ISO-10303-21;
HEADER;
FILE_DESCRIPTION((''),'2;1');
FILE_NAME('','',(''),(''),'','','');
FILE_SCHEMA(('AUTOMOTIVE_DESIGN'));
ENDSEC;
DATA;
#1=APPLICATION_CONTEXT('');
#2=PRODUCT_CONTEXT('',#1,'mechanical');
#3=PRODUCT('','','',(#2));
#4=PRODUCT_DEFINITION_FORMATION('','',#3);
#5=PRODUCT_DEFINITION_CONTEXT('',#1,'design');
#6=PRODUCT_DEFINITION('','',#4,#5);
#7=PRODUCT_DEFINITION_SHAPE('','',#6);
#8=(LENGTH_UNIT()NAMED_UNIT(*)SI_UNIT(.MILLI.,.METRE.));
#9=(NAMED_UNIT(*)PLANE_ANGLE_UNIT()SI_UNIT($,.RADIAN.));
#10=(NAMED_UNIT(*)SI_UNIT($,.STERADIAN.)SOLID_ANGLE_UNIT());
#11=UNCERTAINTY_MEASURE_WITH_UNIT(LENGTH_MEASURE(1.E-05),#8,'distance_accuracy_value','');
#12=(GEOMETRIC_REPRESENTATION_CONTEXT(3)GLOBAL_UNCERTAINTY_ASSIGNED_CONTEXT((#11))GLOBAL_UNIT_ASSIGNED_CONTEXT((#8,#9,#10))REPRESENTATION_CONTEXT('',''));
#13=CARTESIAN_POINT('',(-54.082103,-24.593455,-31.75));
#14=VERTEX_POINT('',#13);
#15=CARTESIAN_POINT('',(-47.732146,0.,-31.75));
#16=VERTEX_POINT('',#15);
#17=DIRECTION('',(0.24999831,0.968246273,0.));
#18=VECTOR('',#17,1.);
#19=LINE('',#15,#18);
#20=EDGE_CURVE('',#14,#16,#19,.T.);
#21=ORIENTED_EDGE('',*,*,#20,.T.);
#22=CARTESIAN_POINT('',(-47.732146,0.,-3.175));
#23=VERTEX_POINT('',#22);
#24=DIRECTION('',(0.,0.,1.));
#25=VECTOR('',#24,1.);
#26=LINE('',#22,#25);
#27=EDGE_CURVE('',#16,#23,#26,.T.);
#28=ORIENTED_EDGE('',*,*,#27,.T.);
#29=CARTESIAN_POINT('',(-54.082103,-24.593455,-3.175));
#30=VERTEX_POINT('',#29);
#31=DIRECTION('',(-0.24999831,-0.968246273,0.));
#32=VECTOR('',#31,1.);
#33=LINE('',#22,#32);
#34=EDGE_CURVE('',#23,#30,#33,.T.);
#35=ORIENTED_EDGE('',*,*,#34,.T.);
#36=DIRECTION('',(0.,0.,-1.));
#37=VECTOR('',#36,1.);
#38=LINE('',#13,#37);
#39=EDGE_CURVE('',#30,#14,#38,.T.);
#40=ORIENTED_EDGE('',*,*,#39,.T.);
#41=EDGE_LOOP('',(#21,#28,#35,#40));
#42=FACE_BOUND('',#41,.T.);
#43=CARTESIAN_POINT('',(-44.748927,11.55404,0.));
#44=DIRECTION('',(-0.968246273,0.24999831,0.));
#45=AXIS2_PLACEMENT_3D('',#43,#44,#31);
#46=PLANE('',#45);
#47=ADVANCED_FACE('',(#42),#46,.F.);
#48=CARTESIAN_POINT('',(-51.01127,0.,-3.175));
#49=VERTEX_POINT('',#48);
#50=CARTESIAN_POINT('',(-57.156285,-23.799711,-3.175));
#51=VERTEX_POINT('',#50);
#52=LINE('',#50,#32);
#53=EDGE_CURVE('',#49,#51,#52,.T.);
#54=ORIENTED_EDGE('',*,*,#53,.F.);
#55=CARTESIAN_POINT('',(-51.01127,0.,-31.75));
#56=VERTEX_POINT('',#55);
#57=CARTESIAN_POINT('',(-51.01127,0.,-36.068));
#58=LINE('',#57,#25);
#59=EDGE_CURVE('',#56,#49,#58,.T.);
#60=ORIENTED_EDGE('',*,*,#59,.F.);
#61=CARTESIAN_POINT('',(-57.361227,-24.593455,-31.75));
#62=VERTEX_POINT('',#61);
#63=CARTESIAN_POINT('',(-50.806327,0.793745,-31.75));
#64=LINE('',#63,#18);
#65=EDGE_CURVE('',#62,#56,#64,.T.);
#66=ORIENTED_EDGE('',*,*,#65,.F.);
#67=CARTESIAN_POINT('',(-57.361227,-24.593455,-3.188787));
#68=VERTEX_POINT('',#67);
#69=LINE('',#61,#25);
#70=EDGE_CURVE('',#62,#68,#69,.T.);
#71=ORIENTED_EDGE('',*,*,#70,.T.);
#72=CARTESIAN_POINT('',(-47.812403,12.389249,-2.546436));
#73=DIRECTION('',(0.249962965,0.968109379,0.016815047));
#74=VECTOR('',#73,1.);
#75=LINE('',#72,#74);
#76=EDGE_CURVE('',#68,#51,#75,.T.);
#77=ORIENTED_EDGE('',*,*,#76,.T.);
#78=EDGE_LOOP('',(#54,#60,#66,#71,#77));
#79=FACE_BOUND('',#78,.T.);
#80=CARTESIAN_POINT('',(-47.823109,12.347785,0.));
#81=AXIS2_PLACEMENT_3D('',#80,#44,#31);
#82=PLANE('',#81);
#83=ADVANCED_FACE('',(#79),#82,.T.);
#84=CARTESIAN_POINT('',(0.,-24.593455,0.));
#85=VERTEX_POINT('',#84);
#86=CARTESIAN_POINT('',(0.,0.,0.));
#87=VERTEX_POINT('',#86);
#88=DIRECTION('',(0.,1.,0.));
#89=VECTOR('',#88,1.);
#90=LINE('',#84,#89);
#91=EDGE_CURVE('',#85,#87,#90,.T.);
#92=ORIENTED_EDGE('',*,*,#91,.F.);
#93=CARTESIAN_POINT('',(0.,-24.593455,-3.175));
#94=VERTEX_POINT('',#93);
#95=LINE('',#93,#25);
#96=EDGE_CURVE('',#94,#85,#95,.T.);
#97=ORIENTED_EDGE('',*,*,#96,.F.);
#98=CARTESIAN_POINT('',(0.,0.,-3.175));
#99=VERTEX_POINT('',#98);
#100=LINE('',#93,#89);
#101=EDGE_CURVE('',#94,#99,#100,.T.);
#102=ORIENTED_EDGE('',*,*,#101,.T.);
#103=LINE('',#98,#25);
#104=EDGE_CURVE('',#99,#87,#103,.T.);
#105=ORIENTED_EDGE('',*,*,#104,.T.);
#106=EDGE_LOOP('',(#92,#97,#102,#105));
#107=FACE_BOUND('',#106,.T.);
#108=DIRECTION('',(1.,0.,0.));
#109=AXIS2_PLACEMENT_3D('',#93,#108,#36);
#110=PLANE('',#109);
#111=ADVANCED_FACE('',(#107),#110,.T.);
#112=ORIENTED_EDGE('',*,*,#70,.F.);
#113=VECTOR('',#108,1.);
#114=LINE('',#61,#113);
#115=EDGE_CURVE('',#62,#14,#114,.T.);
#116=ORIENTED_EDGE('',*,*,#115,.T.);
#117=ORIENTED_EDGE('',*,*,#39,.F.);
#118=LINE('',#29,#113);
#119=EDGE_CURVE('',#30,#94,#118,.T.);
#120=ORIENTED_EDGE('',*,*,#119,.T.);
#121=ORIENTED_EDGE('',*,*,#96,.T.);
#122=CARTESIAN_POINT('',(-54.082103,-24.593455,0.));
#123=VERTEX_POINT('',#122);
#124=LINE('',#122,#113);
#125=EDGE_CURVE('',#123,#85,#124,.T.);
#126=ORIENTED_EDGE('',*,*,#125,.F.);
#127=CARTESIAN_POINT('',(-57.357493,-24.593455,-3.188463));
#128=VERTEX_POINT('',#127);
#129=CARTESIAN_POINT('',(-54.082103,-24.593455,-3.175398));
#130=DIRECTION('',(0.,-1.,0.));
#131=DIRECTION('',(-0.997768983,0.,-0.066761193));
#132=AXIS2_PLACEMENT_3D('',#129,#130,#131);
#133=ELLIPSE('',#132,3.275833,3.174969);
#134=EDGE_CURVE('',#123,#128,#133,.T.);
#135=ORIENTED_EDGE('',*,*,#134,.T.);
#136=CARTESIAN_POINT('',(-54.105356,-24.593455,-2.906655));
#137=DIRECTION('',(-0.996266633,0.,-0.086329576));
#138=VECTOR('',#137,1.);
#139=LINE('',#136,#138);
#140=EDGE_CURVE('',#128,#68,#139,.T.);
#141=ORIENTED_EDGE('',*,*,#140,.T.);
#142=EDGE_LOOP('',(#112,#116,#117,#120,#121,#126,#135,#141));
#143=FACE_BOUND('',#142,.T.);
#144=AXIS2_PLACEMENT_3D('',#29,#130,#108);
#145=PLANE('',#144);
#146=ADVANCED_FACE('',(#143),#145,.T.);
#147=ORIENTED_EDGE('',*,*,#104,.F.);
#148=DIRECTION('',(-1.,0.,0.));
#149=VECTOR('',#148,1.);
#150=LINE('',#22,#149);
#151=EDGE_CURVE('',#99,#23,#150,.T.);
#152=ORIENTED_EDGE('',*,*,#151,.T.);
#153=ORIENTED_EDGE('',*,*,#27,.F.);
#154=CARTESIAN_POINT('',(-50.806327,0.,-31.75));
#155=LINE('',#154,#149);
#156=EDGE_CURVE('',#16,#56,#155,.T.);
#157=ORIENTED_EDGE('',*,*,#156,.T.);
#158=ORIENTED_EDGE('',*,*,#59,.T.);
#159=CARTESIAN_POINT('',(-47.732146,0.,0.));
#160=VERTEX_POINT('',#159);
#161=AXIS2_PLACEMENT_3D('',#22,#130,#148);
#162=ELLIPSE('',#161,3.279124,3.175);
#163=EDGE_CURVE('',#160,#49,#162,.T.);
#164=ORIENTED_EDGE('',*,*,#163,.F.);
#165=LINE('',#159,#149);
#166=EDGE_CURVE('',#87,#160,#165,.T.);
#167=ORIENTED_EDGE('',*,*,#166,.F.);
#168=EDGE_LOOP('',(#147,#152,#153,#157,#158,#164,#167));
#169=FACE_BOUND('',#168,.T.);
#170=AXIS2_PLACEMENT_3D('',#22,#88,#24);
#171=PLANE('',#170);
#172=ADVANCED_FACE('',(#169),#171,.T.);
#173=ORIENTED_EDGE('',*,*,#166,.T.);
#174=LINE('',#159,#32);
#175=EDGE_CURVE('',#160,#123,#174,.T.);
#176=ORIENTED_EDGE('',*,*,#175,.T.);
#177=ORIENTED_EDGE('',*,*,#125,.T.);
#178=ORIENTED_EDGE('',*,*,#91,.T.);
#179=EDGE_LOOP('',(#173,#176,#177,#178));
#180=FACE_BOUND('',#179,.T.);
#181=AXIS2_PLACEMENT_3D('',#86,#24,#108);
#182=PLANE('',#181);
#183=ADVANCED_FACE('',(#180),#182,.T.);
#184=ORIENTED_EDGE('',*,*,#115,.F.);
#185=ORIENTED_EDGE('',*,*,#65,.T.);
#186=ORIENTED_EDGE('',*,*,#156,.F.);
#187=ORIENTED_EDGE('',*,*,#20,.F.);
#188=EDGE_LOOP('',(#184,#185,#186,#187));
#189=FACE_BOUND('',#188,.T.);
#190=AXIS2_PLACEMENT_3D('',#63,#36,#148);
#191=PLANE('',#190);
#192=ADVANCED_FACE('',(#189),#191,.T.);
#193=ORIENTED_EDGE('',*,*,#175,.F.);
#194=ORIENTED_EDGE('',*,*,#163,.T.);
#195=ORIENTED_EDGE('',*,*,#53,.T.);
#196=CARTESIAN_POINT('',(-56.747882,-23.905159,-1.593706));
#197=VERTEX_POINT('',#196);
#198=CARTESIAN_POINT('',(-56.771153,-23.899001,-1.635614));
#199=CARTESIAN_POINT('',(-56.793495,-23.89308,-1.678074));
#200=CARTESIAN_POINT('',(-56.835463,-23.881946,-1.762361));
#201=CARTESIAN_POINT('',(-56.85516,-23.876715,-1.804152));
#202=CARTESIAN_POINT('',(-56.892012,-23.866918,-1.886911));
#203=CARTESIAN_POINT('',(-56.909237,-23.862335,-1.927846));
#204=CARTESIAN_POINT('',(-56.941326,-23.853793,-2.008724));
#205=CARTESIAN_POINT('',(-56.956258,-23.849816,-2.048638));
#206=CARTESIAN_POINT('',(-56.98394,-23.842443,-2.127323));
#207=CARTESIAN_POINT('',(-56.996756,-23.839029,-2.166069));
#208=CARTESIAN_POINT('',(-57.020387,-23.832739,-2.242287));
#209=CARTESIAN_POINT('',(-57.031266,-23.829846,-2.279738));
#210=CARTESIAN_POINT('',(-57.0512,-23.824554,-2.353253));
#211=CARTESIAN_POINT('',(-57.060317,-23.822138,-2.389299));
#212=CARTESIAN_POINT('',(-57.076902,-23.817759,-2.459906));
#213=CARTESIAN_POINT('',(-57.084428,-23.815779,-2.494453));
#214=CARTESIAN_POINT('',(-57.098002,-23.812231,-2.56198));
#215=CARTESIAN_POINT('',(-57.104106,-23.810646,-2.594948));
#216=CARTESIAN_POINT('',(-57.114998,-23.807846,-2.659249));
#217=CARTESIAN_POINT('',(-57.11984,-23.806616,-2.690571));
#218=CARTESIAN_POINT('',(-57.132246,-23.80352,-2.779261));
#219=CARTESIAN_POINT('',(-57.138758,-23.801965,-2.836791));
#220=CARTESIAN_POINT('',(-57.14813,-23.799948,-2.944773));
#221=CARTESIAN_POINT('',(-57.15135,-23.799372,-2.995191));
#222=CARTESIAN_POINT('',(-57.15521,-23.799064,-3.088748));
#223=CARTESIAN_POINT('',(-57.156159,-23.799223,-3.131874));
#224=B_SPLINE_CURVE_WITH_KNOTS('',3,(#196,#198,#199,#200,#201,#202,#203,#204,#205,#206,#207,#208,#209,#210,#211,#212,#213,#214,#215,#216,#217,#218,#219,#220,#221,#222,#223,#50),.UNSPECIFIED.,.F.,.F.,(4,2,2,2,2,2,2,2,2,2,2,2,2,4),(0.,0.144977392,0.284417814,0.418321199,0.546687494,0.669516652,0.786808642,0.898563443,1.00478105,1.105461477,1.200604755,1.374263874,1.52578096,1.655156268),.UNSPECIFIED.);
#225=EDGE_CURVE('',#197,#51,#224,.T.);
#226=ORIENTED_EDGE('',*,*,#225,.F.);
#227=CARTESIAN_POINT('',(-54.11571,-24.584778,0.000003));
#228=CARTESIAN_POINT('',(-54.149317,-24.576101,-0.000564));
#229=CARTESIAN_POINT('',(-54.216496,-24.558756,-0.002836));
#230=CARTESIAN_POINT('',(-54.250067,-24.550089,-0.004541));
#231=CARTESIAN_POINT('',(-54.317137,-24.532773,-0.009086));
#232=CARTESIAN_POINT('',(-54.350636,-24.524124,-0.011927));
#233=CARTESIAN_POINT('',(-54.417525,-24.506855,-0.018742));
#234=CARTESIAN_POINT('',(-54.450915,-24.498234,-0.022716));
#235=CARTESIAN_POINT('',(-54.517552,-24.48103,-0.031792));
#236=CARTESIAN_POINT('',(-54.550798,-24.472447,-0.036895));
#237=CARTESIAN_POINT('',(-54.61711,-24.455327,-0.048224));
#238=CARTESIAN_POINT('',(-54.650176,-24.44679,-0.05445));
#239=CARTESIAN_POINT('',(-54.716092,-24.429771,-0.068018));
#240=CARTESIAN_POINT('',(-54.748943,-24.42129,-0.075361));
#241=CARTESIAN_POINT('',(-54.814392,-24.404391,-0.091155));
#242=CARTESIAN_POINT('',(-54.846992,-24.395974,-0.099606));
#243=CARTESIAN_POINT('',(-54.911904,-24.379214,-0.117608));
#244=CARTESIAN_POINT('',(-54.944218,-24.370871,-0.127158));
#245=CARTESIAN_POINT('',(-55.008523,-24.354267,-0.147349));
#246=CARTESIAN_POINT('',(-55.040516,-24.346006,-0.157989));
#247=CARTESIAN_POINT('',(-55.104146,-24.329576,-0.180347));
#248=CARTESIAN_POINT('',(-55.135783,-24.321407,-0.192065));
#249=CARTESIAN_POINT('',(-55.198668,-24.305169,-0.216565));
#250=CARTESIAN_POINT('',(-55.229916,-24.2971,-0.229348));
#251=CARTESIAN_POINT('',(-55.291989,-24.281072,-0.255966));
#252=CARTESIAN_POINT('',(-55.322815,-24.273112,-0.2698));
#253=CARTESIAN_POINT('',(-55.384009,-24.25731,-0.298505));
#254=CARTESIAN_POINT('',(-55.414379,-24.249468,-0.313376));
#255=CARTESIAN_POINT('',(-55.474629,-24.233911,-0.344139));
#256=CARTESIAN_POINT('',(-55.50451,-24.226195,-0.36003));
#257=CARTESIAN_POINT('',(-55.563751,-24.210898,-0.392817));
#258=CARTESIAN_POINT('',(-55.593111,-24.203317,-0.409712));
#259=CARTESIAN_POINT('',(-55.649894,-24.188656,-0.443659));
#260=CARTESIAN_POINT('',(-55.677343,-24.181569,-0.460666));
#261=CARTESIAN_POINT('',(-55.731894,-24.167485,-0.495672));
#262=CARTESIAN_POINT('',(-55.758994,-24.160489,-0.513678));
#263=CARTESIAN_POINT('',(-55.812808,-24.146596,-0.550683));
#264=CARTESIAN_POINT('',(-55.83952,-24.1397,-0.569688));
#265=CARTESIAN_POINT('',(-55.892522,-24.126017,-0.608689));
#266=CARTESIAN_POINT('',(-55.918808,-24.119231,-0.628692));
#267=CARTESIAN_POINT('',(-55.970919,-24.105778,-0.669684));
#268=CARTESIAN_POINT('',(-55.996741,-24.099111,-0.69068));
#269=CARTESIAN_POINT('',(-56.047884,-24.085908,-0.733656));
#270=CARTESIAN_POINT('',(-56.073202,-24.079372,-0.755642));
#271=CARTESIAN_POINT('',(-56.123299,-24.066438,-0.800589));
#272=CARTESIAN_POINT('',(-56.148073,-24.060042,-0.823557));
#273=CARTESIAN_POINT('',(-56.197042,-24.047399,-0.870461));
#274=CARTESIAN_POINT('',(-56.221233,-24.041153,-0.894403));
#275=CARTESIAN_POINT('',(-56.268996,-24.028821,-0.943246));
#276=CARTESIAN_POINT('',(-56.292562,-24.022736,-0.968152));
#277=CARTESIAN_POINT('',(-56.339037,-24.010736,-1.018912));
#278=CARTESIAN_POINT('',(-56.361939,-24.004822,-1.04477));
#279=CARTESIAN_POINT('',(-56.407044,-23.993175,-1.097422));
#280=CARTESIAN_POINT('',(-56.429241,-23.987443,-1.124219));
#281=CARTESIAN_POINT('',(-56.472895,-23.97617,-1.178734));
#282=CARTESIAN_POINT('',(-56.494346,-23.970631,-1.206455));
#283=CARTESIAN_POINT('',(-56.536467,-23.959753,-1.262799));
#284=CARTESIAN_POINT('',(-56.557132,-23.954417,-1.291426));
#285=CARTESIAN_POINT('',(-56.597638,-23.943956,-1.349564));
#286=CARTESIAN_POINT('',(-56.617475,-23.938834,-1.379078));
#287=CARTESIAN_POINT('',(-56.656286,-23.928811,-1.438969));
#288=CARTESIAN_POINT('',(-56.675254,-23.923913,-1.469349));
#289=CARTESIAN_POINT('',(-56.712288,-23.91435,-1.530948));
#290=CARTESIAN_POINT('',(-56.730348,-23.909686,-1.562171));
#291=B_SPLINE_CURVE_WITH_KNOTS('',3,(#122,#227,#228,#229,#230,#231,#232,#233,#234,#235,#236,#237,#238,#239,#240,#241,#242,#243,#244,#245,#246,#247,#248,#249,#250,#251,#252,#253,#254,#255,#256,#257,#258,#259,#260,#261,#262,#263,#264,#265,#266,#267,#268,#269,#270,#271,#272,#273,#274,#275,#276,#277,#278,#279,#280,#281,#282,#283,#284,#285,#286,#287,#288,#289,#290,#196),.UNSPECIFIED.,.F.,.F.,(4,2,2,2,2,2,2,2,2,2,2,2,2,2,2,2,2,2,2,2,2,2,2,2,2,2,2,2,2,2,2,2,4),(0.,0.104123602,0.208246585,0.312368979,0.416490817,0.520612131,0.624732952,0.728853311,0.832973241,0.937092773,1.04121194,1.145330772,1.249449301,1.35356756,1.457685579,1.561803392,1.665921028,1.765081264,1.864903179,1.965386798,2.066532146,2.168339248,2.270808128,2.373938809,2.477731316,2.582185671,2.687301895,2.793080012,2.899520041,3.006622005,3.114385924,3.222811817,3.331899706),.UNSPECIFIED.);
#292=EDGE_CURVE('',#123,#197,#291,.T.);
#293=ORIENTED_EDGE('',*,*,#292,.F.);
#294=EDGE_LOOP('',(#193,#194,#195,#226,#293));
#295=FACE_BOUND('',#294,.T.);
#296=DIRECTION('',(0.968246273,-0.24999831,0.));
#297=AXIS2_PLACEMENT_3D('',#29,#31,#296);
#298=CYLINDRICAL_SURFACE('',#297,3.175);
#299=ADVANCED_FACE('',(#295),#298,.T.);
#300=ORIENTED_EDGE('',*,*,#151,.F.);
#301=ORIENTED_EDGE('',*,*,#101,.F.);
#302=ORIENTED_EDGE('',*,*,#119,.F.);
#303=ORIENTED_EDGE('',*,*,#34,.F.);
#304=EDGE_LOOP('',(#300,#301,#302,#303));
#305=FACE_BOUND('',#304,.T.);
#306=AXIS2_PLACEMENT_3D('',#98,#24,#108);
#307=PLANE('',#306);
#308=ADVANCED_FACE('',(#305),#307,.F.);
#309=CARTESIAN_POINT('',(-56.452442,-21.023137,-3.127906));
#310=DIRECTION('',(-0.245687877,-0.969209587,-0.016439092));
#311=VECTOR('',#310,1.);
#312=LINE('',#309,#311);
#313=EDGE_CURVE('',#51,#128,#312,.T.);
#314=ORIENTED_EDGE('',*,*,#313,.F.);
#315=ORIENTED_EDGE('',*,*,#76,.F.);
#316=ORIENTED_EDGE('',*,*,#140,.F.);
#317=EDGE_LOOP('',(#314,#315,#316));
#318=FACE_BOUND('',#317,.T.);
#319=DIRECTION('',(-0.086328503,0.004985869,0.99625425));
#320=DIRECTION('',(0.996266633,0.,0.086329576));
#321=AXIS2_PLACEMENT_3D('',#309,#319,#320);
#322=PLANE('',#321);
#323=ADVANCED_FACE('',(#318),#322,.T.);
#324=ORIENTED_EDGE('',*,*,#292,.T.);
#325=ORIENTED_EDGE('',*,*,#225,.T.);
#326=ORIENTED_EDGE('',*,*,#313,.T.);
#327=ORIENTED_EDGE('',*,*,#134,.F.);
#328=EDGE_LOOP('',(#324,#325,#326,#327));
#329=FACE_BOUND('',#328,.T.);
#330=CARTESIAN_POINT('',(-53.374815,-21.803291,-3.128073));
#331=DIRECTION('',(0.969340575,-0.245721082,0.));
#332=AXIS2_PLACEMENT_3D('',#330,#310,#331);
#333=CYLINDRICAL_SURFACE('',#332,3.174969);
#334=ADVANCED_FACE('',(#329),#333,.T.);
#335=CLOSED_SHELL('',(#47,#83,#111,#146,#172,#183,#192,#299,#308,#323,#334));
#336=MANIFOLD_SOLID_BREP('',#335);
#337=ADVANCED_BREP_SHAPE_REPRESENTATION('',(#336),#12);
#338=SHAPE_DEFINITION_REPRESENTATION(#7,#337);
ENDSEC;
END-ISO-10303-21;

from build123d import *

# Parameters (mm, degrees)
BASE_FLANGE5_DEPTH       = 3.175
EDGE_FLANGE4_START       = -37.332955736
EDGE_FLANGE4_DEPTH       = 25.4
CUT_EXTRUDE4_DEPTH       = 4.699
CUT_EXTRUDE4_DEPTH_BACK  = 36.068
BOSS_EXTRUDE1_DEPTH      = 3.81
BOSS_EXTRUDE1_DEPTH_BACK = 31.75
CUT_EXTRUDE8_DEPTH       = 2.794
CUT_EXTRUDE8_DEPTH_BACK  = 3.81


# Read off the part's stored shape, not the designer's step: Edge-Flange4
# Sheet-metal steps are written as plain solids
with BuildPart() as part:
    # Sketch13 → Base-Flange5 (new body)
    with BuildSketch(Plane.XY):
        Polygon((-47.732145582, 0), (0, 0), (0, -24.593455331), (-54.08210266, -24.593455331), align=None)
    extrude(amount=-BASE_FLANGE5_DEPTH)

    # Edge-Flange4 outline → Edge-Flange4 (add)
    with BuildSketch(Plane(origin=(0, 0, 0), x_dir=(0.9682462728649326, -0.24999831016062188, 0), z_dir=(0.24999831016062188, 0.9682462728649326, 0)).offset(EDGE_FLANGE4_START)):
        with BuildLine():
            ThreePointArc((-49.391472056, 3.175), (-48.461536086, 0.92993597), (-46.216472056, 0))
            Line((-46.216472056, 0), (-46.216472056, 31.75))
            Line((-46.216472056, 31.75), (-49.391472056, 31.75))
            Line((-49.391472056, 31.75), (-49.391472056, 3.175))
        make_face()
    extrude(amount=EDGE_FLANGE4_DEPTH)

    # Sketch51 → Cut-Extrude4 (cut, two sides: drawn at the far end of the back side and taken through both)
    with BuildSketch(Plane.XY.offset(-CUT_EXTRUDE4_DEPTH_BACK)):
        Polygon((-47.732145582, 0), (-51.011270004, 0), (-50.806327498, 0.793744635), align=None)
    extrude(amount=CUT_EXTRUDE4_DEPTH + CUT_EXTRUDE4_DEPTH_BACK, mode=Mode.SUBTRACT)

    # Sketch50 → Boss-Extrude1 (add, two sides: drawn at the far end of the back side and taken through both)
    with BuildSketch(Plane.XY.offset(-BOSS_EXTRUDE1_DEPTH_BACK)):
        Polygon((-54.08210266, -24.593455331), (-57.156284576, -23.799710696), (-57.361227082, -24.593455331), align=None)
    extrude(amount=BOSS_EXTRUDE1_DEPTH + BOSS_EXTRUDE1_DEPTH_BACK)

    # Sketch65 → Cut-Extrude8 (cut, two sides: drawn at the far end of the back side and taken through both)
    with BuildSketch(Plane(origin=(-9.11279098, -35.948881484, -0.60974114), x_dir=(0.9654972069490037, -0.2461867540495814, 0.08489537975769736), z_dir=(0.2456878772322161, 0.9692095868518577, 0.01643909168960169)).offset(-CUT_EXTRUDE8_DEPTH_BACK)):
        with BuildLine():
            Line((-45.838084729, -8.341935896), (-46.161536125, -4.546207203))
            ThreePointArc((-46.161536125, -4.546207203), (-48.47736426, -3.810311856), (-49.594602425, -1.652446987))
            Line((-49.594602425, -1.652446987), (-50.428184851, -1.652446987))
            Line((-50.428184851, -1.652446987), (-50.011393638, -8.730016823))
            Line((-50.011393638, -8.730016823), (-50.30622786, -10.563261001))
            Line((-50.30622786, -10.563261001), (-45.635329216, -9.987874877))
            Line((-45.635329216, -9.987874877), (-45.838084729, -8.341935896))
        make_face()
    extrude(amount=CUT_EXTRUDE8_DEPTH + CUT_EXTRUDE8_DEPTH_BACK, mode=Mode.SUBTRACT)


solid = part.part
